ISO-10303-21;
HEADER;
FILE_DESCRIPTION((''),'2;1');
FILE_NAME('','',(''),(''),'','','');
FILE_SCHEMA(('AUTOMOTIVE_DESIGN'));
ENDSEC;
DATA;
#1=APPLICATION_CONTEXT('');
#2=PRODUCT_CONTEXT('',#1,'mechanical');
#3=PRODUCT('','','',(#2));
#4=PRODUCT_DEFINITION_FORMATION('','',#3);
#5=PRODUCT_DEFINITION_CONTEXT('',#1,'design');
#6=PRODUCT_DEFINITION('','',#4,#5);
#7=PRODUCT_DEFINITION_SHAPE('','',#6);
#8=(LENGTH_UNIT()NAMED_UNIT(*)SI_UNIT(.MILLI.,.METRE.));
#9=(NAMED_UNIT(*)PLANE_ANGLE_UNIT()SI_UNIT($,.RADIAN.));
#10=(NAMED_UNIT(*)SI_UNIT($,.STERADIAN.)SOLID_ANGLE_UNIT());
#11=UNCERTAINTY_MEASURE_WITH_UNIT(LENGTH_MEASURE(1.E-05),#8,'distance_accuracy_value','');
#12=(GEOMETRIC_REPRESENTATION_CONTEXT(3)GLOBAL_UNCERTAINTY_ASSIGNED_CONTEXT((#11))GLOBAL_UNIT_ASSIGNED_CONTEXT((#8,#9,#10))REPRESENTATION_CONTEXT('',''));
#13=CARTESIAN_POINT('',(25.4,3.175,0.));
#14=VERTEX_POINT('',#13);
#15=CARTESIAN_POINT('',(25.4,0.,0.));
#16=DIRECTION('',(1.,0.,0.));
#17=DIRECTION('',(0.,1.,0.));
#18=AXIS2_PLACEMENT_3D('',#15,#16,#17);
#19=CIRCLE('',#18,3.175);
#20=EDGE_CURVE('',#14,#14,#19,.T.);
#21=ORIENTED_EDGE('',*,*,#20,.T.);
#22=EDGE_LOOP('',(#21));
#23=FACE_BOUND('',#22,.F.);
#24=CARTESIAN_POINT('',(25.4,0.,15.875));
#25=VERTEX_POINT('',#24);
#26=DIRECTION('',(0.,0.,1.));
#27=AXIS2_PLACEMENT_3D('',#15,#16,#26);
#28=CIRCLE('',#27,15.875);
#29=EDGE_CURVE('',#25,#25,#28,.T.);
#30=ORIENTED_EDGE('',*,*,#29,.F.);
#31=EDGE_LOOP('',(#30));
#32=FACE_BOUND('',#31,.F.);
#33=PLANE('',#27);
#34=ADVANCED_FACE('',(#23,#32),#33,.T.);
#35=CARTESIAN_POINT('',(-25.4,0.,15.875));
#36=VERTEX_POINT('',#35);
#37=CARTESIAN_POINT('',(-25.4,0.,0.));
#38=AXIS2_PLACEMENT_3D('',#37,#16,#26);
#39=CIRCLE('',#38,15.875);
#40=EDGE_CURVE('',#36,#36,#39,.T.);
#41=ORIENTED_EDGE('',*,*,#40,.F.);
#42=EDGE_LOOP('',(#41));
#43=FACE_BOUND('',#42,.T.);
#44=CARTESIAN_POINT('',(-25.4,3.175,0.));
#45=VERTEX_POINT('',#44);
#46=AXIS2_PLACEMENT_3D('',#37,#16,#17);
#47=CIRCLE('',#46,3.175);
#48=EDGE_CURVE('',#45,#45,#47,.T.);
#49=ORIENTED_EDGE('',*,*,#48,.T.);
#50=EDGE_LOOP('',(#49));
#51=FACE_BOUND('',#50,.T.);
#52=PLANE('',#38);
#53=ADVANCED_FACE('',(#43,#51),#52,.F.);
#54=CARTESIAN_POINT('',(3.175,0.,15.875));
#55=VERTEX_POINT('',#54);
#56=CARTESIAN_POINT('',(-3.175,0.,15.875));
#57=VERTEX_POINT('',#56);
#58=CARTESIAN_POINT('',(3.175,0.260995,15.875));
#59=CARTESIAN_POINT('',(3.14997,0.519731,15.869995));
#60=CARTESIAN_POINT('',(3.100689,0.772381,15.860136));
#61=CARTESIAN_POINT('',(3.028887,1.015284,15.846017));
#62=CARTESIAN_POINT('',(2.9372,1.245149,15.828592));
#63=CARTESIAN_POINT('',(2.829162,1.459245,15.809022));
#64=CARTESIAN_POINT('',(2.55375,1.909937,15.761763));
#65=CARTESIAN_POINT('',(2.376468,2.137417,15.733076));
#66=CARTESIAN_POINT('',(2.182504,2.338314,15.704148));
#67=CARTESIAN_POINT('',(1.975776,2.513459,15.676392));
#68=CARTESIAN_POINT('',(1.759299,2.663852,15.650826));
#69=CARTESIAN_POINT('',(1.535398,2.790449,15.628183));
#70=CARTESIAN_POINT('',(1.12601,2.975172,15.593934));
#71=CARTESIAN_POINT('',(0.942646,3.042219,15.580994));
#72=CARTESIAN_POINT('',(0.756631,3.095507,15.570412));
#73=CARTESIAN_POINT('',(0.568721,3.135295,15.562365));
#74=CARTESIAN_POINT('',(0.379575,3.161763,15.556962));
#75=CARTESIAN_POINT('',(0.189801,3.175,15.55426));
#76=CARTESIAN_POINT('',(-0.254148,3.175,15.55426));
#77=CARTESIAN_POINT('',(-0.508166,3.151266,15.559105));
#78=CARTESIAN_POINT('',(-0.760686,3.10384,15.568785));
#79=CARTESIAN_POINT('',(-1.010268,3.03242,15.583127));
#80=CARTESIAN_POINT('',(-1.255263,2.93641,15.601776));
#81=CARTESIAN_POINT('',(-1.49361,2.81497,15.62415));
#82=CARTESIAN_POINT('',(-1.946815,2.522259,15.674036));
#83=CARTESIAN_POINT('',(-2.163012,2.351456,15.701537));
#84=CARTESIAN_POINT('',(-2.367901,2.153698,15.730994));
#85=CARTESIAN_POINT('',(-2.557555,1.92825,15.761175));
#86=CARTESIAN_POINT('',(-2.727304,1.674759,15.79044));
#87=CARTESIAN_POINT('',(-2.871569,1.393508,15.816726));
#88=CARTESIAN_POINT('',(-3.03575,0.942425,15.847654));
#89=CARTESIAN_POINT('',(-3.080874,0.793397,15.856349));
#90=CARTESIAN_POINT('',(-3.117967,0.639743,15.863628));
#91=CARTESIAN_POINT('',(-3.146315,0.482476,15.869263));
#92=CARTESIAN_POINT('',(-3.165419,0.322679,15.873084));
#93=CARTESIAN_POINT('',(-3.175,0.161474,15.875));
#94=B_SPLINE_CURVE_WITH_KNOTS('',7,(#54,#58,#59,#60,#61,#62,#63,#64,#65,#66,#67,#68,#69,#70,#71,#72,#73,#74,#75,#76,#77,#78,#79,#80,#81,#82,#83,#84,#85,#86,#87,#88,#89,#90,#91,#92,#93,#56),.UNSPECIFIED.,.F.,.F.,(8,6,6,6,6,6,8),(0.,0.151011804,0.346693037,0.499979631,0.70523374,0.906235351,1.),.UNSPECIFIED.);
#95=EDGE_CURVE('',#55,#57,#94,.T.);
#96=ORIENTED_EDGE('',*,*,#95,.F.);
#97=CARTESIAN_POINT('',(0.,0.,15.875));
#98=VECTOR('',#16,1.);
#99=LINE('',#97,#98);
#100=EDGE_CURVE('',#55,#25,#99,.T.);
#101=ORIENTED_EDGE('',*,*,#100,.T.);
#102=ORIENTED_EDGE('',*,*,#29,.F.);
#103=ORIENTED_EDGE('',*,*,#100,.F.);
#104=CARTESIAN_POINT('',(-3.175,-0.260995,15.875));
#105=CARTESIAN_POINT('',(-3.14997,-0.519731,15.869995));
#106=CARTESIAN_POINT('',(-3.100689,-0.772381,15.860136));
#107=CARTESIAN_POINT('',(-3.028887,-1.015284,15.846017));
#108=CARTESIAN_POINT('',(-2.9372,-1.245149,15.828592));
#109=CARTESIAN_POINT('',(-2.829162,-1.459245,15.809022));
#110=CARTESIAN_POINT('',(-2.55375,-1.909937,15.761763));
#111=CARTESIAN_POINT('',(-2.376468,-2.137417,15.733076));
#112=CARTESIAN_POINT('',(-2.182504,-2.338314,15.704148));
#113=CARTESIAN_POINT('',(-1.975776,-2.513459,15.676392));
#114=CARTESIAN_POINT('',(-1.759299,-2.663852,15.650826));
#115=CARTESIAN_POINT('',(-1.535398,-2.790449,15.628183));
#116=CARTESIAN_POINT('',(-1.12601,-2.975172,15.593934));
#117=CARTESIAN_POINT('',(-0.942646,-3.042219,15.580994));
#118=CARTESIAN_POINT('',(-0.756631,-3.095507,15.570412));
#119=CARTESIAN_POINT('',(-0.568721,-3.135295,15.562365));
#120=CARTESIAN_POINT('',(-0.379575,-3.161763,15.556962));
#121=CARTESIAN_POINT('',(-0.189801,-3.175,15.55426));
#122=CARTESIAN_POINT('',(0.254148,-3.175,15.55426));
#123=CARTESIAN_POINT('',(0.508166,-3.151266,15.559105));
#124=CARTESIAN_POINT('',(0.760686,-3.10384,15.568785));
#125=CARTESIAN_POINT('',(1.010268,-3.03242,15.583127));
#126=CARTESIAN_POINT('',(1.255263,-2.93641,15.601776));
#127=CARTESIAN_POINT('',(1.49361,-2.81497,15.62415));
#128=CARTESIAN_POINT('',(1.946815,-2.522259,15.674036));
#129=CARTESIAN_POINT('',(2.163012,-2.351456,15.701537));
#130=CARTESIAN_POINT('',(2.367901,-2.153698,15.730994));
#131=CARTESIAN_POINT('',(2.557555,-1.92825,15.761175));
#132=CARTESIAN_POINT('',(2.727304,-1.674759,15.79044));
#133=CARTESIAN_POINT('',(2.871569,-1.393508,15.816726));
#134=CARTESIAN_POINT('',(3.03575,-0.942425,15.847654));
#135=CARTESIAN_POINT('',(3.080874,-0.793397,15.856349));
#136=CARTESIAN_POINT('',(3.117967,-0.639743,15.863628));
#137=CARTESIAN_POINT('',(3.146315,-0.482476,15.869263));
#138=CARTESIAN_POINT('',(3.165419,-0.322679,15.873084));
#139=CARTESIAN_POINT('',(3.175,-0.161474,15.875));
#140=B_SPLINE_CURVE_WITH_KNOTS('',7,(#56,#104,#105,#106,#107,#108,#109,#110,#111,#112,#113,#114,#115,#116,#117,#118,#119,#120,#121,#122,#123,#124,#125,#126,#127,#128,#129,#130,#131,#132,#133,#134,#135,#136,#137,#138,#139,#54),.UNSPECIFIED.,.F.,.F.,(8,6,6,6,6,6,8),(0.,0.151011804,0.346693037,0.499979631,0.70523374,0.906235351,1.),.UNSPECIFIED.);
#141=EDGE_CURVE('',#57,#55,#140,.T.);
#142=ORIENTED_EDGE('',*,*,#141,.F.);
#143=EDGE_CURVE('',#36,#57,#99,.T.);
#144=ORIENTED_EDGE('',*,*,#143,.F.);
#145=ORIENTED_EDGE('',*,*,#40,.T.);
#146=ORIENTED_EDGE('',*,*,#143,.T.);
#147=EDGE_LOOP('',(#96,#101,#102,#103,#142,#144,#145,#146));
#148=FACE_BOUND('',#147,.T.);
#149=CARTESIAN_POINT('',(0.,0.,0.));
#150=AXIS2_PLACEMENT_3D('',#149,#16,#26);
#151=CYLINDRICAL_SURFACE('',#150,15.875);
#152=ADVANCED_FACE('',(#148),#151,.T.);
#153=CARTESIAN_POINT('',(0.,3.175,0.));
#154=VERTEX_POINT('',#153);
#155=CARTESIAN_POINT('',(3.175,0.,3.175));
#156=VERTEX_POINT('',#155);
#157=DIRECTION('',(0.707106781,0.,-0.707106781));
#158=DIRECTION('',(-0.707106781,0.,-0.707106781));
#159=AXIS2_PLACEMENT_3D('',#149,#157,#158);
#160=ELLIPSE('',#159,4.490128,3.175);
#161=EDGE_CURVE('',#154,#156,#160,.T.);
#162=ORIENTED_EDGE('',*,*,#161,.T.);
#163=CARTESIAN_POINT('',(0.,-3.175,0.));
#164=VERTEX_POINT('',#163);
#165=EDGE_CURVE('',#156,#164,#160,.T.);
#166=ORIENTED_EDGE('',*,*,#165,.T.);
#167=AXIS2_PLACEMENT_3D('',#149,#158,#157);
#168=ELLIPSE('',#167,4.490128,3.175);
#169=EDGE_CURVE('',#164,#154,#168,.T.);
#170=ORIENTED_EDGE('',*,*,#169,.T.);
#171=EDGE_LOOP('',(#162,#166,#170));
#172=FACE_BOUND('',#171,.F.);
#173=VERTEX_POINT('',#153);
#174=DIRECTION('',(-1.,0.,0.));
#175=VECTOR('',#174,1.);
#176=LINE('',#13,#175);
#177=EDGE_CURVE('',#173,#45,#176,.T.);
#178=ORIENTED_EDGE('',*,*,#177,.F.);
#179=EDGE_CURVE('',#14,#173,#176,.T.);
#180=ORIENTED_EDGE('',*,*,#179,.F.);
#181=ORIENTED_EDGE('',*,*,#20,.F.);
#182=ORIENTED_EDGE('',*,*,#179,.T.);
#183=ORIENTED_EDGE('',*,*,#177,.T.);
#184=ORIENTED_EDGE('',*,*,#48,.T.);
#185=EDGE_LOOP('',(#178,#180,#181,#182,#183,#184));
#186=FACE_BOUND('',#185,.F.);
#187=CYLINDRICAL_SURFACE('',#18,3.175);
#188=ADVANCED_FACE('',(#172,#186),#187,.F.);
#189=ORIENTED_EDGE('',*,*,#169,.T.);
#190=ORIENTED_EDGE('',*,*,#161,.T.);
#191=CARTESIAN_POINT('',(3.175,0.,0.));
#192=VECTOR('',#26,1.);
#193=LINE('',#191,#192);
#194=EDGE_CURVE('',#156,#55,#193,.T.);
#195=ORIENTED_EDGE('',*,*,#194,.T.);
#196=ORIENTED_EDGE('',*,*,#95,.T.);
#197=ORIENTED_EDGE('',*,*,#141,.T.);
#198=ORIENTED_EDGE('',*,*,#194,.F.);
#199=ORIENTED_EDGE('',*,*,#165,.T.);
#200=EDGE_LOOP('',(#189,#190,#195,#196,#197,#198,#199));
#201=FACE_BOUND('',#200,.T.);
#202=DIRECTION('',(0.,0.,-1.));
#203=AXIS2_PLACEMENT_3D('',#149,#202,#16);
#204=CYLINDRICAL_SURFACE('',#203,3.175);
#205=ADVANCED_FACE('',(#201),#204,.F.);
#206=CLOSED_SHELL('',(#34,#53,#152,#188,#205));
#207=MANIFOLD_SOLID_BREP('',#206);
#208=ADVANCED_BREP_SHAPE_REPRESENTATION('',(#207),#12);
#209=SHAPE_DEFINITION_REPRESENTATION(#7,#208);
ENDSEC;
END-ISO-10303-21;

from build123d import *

# Parameters (mm, degrees)
F0_W     = 50.8
F0_H     = 15.875
F2_R     = 3.175
F3_DEPTH = 15.876
F4_R     = 3.175
F5_DEPTH = 50.8010001


# Not quite as in the source:
# - a feature names something its author has since deleted; it is built from what else it names


with BuildPart() as f1:
    # F0 (on Front) → F1 (revolve)
    with BuildSketch(Plane.XZ):
        with Locations((0, 7.9375)):
            Rectangle(F0_W, F0_H)
    revolve(axis=Axis((8.9611150324, 0, 0), (1, 0, 0)))

    # F2 (on Top) → F3 (cut, through all)
    with BuildSketch(Plane.XY):
        Circle(F2_R)
    extrude(amount=F3_DEPTH, mode=Mode.SUBTRACT)

    # F4 (on face) → F5 (cut, through all)
    with BuildSketch(Plane.YZ.offset(25.4)):
        Circle(F4_R)
    extrude(amount=-F5_DEPTH, mode=Mode.SUBTRACT)


solid = f1.part
